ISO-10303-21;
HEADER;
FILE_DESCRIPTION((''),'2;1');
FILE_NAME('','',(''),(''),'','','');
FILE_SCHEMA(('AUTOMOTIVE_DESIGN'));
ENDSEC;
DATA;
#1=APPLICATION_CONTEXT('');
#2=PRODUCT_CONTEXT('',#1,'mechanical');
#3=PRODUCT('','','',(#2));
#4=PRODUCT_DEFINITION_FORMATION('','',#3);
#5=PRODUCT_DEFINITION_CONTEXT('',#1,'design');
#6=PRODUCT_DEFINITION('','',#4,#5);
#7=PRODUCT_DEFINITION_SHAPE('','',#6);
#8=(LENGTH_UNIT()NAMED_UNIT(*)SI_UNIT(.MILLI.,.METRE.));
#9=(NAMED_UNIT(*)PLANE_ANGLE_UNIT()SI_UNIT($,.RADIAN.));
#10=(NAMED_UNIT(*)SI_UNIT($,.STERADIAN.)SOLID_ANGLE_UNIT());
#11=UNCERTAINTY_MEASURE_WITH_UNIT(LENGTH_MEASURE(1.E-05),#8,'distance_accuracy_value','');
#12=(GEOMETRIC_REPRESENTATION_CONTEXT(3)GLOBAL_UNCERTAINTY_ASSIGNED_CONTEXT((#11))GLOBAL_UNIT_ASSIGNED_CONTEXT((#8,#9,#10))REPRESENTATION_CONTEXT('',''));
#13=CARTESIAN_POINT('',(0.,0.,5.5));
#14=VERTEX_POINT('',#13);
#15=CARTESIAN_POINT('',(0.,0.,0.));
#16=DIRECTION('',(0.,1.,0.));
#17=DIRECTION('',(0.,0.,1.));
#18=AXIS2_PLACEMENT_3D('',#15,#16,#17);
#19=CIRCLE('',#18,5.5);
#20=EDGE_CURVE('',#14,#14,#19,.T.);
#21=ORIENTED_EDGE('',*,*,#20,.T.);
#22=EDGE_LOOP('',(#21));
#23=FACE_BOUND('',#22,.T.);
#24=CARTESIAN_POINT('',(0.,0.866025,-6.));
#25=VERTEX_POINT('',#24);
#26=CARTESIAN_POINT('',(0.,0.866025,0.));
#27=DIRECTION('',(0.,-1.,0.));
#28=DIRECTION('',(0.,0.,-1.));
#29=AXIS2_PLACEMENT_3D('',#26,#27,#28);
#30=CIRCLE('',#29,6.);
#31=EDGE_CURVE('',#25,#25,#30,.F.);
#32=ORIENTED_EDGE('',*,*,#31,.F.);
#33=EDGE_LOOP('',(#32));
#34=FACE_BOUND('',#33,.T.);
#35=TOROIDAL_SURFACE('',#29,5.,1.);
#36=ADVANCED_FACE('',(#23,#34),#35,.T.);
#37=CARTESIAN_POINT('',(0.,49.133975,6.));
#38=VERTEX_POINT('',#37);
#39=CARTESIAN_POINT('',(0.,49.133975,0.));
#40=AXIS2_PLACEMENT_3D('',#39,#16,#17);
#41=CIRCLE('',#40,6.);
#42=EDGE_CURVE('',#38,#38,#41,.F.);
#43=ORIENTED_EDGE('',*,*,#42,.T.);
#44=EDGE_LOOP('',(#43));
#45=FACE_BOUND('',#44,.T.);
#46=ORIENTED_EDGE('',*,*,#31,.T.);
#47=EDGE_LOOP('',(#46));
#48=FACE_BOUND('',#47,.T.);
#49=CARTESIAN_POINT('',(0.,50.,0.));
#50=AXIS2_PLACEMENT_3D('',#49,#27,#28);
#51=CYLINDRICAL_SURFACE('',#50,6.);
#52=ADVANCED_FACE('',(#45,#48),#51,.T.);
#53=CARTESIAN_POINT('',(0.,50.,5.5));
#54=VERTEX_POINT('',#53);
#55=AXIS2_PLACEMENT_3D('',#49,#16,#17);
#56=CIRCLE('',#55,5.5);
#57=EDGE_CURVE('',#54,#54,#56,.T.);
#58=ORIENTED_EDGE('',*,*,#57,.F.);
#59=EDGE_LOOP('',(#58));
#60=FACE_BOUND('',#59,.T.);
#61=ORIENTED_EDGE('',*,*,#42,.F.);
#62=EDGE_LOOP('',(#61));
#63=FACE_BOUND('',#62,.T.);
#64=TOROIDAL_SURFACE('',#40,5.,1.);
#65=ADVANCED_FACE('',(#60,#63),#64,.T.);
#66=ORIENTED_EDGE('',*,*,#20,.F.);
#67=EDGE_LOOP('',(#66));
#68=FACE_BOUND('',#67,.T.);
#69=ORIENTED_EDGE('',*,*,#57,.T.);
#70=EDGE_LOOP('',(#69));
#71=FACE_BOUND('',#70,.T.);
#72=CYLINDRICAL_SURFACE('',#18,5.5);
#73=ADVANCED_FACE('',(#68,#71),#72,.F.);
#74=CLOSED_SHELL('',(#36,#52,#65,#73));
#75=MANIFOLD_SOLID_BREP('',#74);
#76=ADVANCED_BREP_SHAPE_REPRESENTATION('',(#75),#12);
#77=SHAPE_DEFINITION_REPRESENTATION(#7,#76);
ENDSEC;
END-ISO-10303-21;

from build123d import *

# Parameters (mm, degrees)
SKETCH1_R           = 6
BOSS_EXTRUDE1_DEPTH = 50
SKETCH2_R           = 5.5
CUT_EXTRUDE1_DEPTH  = 50
FILLET1_R           = 1
FILLET2_R           = 1


with BuildPart() as part:
    # Sketch1 → Boss-Extrude1 (new body)
    with BuildSketch(Plane(origin=(0, 0, 0), x_dir=(1, 0, 0), z_dir=(0, 1, 0))):
        with Locations(Location((0, 0, 0), (0, 0, 270))):
            Circle(SKETCH1_R)
    extrude(amount=BOSS_EXTRUDE1_DEPTH)

    # Sketch2 → Cut-Extrude1 (cut)
    with BuildSketch(Plane(origin=(0, 50, 0), x_dir=(1, 0, 0), z_dir=(0, 1, 0))):
        with Locations(Location((0, 0, 0), (0, 0, 270))):
            Circle(SKETCH2_R)
    extrude(amount=-CUT_EXTRUDE1_DEPTH, mode=Mode.SUBTRACT)

    # Fillet1
    # the kernel refuses this fillet: 1 mm, written as the material it takes off along each edge
    with BuildSketch(Plane(origin=(0, 50, 0), x_dir=(0, 0, 1), z_dir=(-1, 0, 0))) as fillet1_piece_1:
        with BuildLine():
            CenterArc((5, -0.866025404), FILLET1_R, 0, 60)
            Line((5.5, 0), (5.51, 0.017320508))
            ThreePointArc((5.51, 0.017320508), (5.75, 0.02), (6, 0.02))
            Line((6, 0.02), (6.02, 0))
            Line((6.02, 0), (6.02, -0.866025404))
            Line((6.02, -0.866025404), (6, -0.866025404))
        make_face()
    revolve(axis=Axis((0, 50, 0), (0, 1, 0)), mode=Mode.SUBTRACT)

    # Fillet2
    # the kernel refuses this fillet: 1 mm, written as the material it takes off along each edge
    with BuildSketch(Plane(origin=(0, 0, 0), x_dir=(0, 0, 1), z_dir=(-1, 0, 0))) as fillet2_piece_1:
        with BuildLine():
            CenterArc((5, 0.866025404), FILLET2_R, 300, 60)
            Line((5.5, 0), (5.51, -0.017320508))
            ThreePointArc((5.51, -0.017320508), (5.75, -0.02), (6, -0.02))
            Line((6, -0.02), (6.02, 0))
            Line((6.02, 0), (6.02, 0.866025404))
            Line((6.02, 0.866025404), (6, 0.866025404))
        make_face()
    revolve(axis=Axis((0, 0, 0), (0, 1, 0)), mode=Mode.SUBTRACT)


solid = part.part
